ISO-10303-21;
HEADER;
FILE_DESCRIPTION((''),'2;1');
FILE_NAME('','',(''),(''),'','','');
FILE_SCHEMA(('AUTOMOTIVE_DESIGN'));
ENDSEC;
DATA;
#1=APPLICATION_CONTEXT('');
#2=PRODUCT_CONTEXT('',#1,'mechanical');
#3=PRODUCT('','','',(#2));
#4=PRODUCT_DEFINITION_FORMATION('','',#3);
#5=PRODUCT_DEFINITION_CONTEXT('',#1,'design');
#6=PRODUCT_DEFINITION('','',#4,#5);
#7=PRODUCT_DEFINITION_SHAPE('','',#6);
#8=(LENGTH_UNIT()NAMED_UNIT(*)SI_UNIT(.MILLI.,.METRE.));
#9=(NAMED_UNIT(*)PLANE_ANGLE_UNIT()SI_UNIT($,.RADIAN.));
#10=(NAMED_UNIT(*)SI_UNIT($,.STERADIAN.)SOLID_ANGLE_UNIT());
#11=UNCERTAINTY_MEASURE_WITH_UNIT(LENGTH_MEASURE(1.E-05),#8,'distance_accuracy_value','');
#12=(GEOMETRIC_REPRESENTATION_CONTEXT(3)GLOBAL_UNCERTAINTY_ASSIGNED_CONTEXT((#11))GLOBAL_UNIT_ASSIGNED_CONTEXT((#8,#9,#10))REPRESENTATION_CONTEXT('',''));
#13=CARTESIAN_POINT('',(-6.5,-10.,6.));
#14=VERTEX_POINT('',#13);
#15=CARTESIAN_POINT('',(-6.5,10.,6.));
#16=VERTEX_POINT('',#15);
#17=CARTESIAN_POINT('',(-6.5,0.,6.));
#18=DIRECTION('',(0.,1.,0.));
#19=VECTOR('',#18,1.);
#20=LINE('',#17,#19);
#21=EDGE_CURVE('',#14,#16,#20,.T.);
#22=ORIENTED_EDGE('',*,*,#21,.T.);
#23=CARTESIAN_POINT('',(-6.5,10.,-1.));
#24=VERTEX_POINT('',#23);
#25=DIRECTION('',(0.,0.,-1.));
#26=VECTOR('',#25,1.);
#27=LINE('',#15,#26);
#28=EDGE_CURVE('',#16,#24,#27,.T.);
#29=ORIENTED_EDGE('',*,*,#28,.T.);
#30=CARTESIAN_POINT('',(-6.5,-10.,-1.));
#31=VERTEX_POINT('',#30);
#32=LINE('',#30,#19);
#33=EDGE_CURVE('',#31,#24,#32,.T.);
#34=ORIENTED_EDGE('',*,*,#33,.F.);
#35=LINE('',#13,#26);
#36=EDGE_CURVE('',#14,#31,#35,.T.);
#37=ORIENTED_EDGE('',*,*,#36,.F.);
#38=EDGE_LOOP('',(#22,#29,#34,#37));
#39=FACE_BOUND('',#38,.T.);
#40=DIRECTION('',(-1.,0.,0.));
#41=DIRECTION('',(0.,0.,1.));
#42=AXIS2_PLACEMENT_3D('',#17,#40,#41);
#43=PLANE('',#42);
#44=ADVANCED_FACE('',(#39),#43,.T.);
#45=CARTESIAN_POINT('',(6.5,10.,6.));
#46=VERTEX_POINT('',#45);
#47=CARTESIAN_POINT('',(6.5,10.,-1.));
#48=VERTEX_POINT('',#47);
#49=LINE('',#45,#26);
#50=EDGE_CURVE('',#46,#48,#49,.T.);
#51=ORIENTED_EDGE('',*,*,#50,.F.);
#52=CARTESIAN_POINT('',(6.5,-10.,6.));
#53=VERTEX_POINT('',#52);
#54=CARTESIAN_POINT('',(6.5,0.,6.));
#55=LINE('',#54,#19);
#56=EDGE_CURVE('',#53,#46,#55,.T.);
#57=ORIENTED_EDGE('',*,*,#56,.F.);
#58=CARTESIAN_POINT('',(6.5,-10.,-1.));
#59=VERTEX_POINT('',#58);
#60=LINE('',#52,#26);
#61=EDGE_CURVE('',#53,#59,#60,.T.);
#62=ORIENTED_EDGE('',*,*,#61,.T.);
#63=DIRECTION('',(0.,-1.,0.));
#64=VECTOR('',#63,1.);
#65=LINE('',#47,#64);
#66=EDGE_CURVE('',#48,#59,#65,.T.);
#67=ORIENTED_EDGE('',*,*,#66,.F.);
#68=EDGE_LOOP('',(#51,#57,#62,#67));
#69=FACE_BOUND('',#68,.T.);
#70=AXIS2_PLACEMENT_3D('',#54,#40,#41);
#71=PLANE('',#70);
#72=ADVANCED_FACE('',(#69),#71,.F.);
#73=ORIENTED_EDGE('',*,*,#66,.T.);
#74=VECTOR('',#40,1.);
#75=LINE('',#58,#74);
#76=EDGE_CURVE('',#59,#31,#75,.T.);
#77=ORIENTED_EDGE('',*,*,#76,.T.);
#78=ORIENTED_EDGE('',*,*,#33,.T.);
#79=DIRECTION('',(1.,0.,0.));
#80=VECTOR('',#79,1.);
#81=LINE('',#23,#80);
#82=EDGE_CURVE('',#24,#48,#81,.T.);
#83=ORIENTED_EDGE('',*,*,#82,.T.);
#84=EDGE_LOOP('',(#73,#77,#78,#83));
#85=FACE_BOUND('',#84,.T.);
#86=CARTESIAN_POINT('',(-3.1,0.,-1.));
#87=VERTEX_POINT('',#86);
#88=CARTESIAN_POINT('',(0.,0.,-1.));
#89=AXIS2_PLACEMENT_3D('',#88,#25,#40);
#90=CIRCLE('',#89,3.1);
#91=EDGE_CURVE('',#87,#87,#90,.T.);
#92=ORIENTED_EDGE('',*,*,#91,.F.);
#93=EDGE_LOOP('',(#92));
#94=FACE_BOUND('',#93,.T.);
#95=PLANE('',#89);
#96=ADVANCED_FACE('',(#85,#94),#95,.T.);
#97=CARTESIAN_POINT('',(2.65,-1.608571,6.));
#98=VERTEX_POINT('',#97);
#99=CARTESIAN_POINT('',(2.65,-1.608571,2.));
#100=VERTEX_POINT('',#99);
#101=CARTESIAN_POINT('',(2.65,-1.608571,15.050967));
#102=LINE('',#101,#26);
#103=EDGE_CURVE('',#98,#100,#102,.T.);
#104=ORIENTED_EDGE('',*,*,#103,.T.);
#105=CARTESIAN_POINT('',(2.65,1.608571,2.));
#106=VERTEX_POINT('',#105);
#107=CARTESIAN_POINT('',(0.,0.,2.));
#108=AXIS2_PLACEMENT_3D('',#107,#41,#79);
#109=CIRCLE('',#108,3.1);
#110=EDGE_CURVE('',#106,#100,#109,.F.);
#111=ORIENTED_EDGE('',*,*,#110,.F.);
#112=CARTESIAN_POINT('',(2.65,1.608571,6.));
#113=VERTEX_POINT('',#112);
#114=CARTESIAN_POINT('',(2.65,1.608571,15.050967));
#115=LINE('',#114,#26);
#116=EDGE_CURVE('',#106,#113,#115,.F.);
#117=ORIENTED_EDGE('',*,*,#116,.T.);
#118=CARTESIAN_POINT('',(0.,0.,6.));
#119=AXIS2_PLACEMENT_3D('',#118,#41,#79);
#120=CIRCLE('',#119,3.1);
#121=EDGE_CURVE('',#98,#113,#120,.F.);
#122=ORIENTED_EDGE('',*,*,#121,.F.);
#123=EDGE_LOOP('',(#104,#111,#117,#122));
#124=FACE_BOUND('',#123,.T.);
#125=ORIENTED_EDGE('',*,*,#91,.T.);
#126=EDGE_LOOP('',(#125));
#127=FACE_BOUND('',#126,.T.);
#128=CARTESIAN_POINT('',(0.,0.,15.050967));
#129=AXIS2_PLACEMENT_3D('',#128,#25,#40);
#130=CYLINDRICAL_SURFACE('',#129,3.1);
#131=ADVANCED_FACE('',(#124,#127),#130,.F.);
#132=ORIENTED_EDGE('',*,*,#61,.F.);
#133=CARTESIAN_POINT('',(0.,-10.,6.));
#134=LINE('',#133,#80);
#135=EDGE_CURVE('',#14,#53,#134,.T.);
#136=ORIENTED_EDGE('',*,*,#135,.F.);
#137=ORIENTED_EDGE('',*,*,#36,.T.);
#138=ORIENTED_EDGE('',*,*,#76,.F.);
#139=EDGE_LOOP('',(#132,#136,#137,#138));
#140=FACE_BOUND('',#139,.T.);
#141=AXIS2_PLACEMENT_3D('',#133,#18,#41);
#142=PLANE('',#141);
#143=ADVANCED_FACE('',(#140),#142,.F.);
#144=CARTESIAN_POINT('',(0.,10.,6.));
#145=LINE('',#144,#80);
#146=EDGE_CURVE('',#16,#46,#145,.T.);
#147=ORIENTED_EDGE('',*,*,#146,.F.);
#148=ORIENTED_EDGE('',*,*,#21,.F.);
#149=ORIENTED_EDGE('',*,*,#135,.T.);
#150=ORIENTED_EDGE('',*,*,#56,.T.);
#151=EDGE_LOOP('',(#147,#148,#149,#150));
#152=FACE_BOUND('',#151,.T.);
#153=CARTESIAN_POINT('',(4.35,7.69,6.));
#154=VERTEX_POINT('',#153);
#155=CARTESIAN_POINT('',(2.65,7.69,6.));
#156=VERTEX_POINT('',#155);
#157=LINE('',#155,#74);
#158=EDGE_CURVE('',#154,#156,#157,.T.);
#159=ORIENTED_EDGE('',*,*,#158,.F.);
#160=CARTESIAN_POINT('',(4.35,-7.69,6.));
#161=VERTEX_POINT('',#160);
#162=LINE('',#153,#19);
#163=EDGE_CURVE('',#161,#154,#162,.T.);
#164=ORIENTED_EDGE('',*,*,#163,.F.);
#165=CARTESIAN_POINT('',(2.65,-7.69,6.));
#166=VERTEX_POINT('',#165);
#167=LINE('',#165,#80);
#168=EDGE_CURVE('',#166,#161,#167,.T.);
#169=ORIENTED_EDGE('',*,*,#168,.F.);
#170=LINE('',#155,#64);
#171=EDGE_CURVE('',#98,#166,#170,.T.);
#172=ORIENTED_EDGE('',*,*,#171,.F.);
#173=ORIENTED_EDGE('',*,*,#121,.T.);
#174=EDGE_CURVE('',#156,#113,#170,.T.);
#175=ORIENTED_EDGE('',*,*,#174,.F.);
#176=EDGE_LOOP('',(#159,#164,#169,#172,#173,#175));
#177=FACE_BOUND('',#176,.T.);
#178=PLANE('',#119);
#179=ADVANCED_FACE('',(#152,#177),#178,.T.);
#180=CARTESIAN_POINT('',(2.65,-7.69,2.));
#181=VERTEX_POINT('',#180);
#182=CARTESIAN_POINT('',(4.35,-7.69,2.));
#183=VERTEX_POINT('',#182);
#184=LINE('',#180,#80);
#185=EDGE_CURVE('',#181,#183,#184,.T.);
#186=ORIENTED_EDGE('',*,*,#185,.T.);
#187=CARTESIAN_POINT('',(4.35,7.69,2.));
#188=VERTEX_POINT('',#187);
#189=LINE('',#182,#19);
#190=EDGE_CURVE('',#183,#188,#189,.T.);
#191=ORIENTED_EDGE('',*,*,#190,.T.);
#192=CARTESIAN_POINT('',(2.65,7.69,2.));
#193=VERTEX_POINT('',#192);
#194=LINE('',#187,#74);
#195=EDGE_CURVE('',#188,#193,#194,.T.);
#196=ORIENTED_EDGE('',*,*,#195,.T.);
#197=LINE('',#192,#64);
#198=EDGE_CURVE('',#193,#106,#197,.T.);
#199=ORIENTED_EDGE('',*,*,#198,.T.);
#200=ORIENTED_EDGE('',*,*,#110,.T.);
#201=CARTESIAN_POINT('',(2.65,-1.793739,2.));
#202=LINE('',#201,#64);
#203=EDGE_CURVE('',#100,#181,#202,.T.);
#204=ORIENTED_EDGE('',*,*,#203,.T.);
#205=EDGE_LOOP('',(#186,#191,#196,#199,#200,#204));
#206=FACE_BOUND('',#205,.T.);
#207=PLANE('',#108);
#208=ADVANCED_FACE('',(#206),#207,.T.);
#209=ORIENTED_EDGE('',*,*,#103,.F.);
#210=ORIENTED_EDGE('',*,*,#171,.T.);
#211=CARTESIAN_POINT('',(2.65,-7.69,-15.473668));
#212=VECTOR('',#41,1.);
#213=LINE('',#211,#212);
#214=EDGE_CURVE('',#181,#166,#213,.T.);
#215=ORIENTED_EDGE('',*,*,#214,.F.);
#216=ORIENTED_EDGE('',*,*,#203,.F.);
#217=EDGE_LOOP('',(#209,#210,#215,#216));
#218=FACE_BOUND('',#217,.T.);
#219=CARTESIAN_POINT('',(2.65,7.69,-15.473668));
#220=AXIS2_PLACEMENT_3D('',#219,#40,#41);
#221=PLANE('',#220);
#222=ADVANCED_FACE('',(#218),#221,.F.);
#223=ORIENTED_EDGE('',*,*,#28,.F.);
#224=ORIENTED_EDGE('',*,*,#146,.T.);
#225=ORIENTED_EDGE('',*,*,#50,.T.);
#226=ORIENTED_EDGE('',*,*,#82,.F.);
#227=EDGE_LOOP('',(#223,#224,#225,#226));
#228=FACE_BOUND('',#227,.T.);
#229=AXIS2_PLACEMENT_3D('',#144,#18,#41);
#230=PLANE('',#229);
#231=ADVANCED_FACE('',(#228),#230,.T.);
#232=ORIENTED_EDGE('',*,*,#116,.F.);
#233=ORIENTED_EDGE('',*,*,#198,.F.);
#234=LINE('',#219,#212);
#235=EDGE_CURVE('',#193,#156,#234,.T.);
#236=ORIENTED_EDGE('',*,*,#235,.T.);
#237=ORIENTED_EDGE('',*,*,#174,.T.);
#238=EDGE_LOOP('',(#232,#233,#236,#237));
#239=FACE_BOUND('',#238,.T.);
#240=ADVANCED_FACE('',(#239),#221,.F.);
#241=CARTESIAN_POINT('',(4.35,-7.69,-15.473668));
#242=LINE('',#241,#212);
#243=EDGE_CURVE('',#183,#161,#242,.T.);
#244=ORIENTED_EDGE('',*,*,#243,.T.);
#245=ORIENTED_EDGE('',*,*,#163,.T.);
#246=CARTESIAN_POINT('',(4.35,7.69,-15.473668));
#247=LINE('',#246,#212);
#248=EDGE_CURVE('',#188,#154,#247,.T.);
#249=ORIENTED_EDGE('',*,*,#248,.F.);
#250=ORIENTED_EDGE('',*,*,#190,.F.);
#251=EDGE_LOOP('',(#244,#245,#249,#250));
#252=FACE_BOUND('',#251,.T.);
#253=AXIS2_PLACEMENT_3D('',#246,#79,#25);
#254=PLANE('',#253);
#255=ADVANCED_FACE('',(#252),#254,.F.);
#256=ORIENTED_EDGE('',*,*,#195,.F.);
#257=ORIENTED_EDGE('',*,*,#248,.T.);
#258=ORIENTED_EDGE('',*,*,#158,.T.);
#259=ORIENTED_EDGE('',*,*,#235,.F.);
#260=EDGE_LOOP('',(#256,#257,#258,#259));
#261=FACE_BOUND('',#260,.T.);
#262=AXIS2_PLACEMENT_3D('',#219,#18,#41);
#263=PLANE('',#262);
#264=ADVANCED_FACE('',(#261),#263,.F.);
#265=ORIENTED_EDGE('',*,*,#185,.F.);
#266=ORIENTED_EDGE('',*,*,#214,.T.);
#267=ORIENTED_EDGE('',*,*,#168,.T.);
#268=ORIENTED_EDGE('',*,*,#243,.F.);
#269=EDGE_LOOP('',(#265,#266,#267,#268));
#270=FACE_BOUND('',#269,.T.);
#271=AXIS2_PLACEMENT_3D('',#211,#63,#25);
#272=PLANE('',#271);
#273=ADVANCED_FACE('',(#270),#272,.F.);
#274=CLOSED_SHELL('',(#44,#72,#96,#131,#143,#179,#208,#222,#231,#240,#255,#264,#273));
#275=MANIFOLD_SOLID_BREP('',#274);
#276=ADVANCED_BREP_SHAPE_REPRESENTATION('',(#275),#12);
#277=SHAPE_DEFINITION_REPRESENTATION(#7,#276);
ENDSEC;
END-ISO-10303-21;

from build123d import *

# Parameters (mm, degrees)
SKETCH2_W           = 13
SKETCH2_H           = 20
BOSS_EXTRUDE1_DEPTH = 6
BOSS_EXTRUDE2_DEPTH = 2
BOSS_EXTRUDE3_START = 1
SKETCH3_W           = 13
SKETCH3_H           = 20
SKETCH3_R           = 3.2
BOSS_EXTRUDE3_DEPTH = 1
BOSS_EXTRUDE4_DEPTH = 4
CUT_EXTRUDE1_START  = -6
CUT_EXTRUDE1_DEPTH  = 6
BOSS_EXTRUDE5_DEPTH = 2
SKETCH8_R           = 3.2
SKETCH8_R_2         = 3.1
BOSS_EXTRUDE6_DEPTH = 7
SKETCH9_W           = 1.7
SKETCH9_H           = 15.38
CUT_EXTRUDE2_DEPTH  = 4


# Read off the part's stored shape, not the designer's step: Cut-Extrude1
with BuildPart() as part:
    # Sketch2 → Boss-Extrude1 (new body)
    with BuildSketch(Plane.XY):
        Rectangle(SKETCH2_W, SKETCH2_H)
        with BuildLine():
            Line((1.3, -9.04), (1.3, -2.924038303))
            ThreePointArc((1.3, -2.924038303), (-3.2, 0), (1.3, 2.924038303))
            Line((1.3, 2.924038303), (1.3, 9.04))
            Line((1.3, 9.04), (5.7, 9.04))
            Line((5.7, 9.04), (5.7, -9.04))
            Line((5.7, -9.04), (1.3, -9.04))
        make_face(mode=Mode.SUBTRACT)
    extrude(amount=BOSS_EXTRUDE1_DEPTH)

    # Sketch2<3> → Boss-Extrude2 (add)
    with BuildSketch(Plane.XY):
        with BuildLine():
            Line((4.2, 7.54), (4.2, -7.54))
            Line((4.2, -7.54), (2.8, -7.54))
            Line((2.8, -7.54), (2.8, -1.549193338))
            ThreePointArc((2.8, -1.549193338), (2.162186317, -2.359014695), (1.3, -2.924038303))
            Line((1.3, -2.924038303), (1.3, -9.04))
            Line((1.3, -9.04), (5.7, -9.04))
            Line((5.7, -9.04), (5.7, 9.04))
            Line((5.7, 9.04), (1.3, 9.04))
            Line((1.3, 9.04), (1.3, 2.924038303))
            ThreePointArc((1.3, 2.924038303), (2.162186317, 2.359014695), (2.8, 1.549193338))
            Line((2.8, 1.549193338), (2.8, 7.54))
            Line((2.8, 7.54), (4.2, 7.54))
        make_face()
    extrude(amount=BOSS_EXTRUDE2_DEPTH)

    # Sketch3 → Boss-Extrude3 (add)
    with BuildSketch(Plane(origin=(0, 0, 0), x_dir=(-1, 0, 0), z_dir=(0, 0, -1)).offset(BOSS_EXTRUDE3_START)):
        Rectangle(SKETCH3_W, SKETCH3_H)
        Circle(SKETCH3_R, mode=Mode.SUBTRACT)
    extrude(amount=-BOSS_EXTRUDE3_DEPTH)

    # Sketch4 → Boss-Extrude4 (add)
    with BuildSketch(Plane.XY.offset(2)):
        with BuildLine():
            Line((2.8, 1.549193338), (2.8, 7.54))
            Line((2.8, 7.54), (4.2, 7.54))
            Line((4.2, 7.54), (4.2, -7.54))
            Line((4.2, -7.54), (2.8, -7.54))
            Line((2.8, -7.54), (2.8, -1.549193338))
            ThreePointArc((2.8, -1.549193338), (2.162186317, -2.359014695), (1.3, -2.924038303))
            Line((1.3, -2.924038303), (1.3, -9.04))
            Line((1.3, -9.04), (5.7, -9.04))
            Line((5.7, -9.04), (5.7, 9.04))
            Line((5.7, 9.04), (1.3, 9.04))
            Line((1.3, 9.04), (1.3, 2.924038303))
            ThreePointArc((1.3, 2.924038303), (2.162186317, 2.359014695), (2.8, 1.549193338))
        make_face()
    extrude(amount=BOSS_EXTRUDE4_DEPTH)

    # Cut-Extrude1 outline → Cut-Extrude1 (cut)
    with BuildSketch(Plane.XY.offset(6).offset(CUT_EXTRUDE1_START)):
        with BuildLine():
            Line((4.35, 7.69), (2.65, 7.69))
            Line((2.65, 7.69), (2.65, 1.793739111))
            ThreePointArc((2.65, 1.793739111), (2.727741861, 1.673148033), (2.8, 1.549193338))
            Line((2.8, 1.549193338), (2.8, 7.54))
            Line((2.8, 7.54), (4.2, 7.54))
            Line((4.2, 7.54), (4.2, -7.54))
            Line((4.2, -7.54), (2.8, -7.54))
            Line((2.8, -7.54), (2.8, -1.549193338))
            ThreePointArc((2.8, -1.549193338), (2.727741861, -1.673148033), (2.65, -1.793739111))
            Line((2.65, -1.793739111), (2.65, -7.69))
            Line((2.65, -7.69), (4.35, -7.69))
            Line((4.35, -7.69), (4.35, 7.69))
        make_face()
    extrude(amount=CUT_EXTRUDE1_DEPTH, mode=Mode.SUBTRACT)

    # Sketch7 → Boss-Extrude5 (add)
    with BuildSketch(Plane.XY):
        with BuildLine():
            Line((2.65, 7.69), (2.65, 1.793739111))
            ThreePointArc((2.65, 1.793739111), (3.2, 0), (2.65, -1.793739111))
            Line((2.65, -1.793739111), (2.65, -7.69))
            Line((2.65, -7.69), (4.35, -7.69))
            Line((4.35, -7.69), (4.35, 7.69))
            Line((4.35, 7.69), (2.65, 7.69))
        make_face()
    extrude(amount=BOSS_EXTRUDE5_DEPTH)

    # Sketch8 → Boss-Extrude6 (add)
    with BuildSketch(Plane(origin=(0, 0, -1), x_dir=(-1, 0, 0), z_dir=(0, 0, -1))):
        Circle(SKETCH8_R)
        Circle(SKETCH8_R_2, mode=Mode.SUBTRACT)
    extrude(amount=-BOSS_EXTRUDE6_DEPTH)

    # Sketch9 → Cut-Extrude2 (cut)
    with BuildSketch(Plane.XY.offset(6)):
        with Locations((3.5, 0)):
            Rectangle(SKETCH9_W, SKETCH9_H)
    extrude(amount=-CUT_EXTRUDE2_DEPTH, mode=Mode.SUBTRACT)


solid = part.part
